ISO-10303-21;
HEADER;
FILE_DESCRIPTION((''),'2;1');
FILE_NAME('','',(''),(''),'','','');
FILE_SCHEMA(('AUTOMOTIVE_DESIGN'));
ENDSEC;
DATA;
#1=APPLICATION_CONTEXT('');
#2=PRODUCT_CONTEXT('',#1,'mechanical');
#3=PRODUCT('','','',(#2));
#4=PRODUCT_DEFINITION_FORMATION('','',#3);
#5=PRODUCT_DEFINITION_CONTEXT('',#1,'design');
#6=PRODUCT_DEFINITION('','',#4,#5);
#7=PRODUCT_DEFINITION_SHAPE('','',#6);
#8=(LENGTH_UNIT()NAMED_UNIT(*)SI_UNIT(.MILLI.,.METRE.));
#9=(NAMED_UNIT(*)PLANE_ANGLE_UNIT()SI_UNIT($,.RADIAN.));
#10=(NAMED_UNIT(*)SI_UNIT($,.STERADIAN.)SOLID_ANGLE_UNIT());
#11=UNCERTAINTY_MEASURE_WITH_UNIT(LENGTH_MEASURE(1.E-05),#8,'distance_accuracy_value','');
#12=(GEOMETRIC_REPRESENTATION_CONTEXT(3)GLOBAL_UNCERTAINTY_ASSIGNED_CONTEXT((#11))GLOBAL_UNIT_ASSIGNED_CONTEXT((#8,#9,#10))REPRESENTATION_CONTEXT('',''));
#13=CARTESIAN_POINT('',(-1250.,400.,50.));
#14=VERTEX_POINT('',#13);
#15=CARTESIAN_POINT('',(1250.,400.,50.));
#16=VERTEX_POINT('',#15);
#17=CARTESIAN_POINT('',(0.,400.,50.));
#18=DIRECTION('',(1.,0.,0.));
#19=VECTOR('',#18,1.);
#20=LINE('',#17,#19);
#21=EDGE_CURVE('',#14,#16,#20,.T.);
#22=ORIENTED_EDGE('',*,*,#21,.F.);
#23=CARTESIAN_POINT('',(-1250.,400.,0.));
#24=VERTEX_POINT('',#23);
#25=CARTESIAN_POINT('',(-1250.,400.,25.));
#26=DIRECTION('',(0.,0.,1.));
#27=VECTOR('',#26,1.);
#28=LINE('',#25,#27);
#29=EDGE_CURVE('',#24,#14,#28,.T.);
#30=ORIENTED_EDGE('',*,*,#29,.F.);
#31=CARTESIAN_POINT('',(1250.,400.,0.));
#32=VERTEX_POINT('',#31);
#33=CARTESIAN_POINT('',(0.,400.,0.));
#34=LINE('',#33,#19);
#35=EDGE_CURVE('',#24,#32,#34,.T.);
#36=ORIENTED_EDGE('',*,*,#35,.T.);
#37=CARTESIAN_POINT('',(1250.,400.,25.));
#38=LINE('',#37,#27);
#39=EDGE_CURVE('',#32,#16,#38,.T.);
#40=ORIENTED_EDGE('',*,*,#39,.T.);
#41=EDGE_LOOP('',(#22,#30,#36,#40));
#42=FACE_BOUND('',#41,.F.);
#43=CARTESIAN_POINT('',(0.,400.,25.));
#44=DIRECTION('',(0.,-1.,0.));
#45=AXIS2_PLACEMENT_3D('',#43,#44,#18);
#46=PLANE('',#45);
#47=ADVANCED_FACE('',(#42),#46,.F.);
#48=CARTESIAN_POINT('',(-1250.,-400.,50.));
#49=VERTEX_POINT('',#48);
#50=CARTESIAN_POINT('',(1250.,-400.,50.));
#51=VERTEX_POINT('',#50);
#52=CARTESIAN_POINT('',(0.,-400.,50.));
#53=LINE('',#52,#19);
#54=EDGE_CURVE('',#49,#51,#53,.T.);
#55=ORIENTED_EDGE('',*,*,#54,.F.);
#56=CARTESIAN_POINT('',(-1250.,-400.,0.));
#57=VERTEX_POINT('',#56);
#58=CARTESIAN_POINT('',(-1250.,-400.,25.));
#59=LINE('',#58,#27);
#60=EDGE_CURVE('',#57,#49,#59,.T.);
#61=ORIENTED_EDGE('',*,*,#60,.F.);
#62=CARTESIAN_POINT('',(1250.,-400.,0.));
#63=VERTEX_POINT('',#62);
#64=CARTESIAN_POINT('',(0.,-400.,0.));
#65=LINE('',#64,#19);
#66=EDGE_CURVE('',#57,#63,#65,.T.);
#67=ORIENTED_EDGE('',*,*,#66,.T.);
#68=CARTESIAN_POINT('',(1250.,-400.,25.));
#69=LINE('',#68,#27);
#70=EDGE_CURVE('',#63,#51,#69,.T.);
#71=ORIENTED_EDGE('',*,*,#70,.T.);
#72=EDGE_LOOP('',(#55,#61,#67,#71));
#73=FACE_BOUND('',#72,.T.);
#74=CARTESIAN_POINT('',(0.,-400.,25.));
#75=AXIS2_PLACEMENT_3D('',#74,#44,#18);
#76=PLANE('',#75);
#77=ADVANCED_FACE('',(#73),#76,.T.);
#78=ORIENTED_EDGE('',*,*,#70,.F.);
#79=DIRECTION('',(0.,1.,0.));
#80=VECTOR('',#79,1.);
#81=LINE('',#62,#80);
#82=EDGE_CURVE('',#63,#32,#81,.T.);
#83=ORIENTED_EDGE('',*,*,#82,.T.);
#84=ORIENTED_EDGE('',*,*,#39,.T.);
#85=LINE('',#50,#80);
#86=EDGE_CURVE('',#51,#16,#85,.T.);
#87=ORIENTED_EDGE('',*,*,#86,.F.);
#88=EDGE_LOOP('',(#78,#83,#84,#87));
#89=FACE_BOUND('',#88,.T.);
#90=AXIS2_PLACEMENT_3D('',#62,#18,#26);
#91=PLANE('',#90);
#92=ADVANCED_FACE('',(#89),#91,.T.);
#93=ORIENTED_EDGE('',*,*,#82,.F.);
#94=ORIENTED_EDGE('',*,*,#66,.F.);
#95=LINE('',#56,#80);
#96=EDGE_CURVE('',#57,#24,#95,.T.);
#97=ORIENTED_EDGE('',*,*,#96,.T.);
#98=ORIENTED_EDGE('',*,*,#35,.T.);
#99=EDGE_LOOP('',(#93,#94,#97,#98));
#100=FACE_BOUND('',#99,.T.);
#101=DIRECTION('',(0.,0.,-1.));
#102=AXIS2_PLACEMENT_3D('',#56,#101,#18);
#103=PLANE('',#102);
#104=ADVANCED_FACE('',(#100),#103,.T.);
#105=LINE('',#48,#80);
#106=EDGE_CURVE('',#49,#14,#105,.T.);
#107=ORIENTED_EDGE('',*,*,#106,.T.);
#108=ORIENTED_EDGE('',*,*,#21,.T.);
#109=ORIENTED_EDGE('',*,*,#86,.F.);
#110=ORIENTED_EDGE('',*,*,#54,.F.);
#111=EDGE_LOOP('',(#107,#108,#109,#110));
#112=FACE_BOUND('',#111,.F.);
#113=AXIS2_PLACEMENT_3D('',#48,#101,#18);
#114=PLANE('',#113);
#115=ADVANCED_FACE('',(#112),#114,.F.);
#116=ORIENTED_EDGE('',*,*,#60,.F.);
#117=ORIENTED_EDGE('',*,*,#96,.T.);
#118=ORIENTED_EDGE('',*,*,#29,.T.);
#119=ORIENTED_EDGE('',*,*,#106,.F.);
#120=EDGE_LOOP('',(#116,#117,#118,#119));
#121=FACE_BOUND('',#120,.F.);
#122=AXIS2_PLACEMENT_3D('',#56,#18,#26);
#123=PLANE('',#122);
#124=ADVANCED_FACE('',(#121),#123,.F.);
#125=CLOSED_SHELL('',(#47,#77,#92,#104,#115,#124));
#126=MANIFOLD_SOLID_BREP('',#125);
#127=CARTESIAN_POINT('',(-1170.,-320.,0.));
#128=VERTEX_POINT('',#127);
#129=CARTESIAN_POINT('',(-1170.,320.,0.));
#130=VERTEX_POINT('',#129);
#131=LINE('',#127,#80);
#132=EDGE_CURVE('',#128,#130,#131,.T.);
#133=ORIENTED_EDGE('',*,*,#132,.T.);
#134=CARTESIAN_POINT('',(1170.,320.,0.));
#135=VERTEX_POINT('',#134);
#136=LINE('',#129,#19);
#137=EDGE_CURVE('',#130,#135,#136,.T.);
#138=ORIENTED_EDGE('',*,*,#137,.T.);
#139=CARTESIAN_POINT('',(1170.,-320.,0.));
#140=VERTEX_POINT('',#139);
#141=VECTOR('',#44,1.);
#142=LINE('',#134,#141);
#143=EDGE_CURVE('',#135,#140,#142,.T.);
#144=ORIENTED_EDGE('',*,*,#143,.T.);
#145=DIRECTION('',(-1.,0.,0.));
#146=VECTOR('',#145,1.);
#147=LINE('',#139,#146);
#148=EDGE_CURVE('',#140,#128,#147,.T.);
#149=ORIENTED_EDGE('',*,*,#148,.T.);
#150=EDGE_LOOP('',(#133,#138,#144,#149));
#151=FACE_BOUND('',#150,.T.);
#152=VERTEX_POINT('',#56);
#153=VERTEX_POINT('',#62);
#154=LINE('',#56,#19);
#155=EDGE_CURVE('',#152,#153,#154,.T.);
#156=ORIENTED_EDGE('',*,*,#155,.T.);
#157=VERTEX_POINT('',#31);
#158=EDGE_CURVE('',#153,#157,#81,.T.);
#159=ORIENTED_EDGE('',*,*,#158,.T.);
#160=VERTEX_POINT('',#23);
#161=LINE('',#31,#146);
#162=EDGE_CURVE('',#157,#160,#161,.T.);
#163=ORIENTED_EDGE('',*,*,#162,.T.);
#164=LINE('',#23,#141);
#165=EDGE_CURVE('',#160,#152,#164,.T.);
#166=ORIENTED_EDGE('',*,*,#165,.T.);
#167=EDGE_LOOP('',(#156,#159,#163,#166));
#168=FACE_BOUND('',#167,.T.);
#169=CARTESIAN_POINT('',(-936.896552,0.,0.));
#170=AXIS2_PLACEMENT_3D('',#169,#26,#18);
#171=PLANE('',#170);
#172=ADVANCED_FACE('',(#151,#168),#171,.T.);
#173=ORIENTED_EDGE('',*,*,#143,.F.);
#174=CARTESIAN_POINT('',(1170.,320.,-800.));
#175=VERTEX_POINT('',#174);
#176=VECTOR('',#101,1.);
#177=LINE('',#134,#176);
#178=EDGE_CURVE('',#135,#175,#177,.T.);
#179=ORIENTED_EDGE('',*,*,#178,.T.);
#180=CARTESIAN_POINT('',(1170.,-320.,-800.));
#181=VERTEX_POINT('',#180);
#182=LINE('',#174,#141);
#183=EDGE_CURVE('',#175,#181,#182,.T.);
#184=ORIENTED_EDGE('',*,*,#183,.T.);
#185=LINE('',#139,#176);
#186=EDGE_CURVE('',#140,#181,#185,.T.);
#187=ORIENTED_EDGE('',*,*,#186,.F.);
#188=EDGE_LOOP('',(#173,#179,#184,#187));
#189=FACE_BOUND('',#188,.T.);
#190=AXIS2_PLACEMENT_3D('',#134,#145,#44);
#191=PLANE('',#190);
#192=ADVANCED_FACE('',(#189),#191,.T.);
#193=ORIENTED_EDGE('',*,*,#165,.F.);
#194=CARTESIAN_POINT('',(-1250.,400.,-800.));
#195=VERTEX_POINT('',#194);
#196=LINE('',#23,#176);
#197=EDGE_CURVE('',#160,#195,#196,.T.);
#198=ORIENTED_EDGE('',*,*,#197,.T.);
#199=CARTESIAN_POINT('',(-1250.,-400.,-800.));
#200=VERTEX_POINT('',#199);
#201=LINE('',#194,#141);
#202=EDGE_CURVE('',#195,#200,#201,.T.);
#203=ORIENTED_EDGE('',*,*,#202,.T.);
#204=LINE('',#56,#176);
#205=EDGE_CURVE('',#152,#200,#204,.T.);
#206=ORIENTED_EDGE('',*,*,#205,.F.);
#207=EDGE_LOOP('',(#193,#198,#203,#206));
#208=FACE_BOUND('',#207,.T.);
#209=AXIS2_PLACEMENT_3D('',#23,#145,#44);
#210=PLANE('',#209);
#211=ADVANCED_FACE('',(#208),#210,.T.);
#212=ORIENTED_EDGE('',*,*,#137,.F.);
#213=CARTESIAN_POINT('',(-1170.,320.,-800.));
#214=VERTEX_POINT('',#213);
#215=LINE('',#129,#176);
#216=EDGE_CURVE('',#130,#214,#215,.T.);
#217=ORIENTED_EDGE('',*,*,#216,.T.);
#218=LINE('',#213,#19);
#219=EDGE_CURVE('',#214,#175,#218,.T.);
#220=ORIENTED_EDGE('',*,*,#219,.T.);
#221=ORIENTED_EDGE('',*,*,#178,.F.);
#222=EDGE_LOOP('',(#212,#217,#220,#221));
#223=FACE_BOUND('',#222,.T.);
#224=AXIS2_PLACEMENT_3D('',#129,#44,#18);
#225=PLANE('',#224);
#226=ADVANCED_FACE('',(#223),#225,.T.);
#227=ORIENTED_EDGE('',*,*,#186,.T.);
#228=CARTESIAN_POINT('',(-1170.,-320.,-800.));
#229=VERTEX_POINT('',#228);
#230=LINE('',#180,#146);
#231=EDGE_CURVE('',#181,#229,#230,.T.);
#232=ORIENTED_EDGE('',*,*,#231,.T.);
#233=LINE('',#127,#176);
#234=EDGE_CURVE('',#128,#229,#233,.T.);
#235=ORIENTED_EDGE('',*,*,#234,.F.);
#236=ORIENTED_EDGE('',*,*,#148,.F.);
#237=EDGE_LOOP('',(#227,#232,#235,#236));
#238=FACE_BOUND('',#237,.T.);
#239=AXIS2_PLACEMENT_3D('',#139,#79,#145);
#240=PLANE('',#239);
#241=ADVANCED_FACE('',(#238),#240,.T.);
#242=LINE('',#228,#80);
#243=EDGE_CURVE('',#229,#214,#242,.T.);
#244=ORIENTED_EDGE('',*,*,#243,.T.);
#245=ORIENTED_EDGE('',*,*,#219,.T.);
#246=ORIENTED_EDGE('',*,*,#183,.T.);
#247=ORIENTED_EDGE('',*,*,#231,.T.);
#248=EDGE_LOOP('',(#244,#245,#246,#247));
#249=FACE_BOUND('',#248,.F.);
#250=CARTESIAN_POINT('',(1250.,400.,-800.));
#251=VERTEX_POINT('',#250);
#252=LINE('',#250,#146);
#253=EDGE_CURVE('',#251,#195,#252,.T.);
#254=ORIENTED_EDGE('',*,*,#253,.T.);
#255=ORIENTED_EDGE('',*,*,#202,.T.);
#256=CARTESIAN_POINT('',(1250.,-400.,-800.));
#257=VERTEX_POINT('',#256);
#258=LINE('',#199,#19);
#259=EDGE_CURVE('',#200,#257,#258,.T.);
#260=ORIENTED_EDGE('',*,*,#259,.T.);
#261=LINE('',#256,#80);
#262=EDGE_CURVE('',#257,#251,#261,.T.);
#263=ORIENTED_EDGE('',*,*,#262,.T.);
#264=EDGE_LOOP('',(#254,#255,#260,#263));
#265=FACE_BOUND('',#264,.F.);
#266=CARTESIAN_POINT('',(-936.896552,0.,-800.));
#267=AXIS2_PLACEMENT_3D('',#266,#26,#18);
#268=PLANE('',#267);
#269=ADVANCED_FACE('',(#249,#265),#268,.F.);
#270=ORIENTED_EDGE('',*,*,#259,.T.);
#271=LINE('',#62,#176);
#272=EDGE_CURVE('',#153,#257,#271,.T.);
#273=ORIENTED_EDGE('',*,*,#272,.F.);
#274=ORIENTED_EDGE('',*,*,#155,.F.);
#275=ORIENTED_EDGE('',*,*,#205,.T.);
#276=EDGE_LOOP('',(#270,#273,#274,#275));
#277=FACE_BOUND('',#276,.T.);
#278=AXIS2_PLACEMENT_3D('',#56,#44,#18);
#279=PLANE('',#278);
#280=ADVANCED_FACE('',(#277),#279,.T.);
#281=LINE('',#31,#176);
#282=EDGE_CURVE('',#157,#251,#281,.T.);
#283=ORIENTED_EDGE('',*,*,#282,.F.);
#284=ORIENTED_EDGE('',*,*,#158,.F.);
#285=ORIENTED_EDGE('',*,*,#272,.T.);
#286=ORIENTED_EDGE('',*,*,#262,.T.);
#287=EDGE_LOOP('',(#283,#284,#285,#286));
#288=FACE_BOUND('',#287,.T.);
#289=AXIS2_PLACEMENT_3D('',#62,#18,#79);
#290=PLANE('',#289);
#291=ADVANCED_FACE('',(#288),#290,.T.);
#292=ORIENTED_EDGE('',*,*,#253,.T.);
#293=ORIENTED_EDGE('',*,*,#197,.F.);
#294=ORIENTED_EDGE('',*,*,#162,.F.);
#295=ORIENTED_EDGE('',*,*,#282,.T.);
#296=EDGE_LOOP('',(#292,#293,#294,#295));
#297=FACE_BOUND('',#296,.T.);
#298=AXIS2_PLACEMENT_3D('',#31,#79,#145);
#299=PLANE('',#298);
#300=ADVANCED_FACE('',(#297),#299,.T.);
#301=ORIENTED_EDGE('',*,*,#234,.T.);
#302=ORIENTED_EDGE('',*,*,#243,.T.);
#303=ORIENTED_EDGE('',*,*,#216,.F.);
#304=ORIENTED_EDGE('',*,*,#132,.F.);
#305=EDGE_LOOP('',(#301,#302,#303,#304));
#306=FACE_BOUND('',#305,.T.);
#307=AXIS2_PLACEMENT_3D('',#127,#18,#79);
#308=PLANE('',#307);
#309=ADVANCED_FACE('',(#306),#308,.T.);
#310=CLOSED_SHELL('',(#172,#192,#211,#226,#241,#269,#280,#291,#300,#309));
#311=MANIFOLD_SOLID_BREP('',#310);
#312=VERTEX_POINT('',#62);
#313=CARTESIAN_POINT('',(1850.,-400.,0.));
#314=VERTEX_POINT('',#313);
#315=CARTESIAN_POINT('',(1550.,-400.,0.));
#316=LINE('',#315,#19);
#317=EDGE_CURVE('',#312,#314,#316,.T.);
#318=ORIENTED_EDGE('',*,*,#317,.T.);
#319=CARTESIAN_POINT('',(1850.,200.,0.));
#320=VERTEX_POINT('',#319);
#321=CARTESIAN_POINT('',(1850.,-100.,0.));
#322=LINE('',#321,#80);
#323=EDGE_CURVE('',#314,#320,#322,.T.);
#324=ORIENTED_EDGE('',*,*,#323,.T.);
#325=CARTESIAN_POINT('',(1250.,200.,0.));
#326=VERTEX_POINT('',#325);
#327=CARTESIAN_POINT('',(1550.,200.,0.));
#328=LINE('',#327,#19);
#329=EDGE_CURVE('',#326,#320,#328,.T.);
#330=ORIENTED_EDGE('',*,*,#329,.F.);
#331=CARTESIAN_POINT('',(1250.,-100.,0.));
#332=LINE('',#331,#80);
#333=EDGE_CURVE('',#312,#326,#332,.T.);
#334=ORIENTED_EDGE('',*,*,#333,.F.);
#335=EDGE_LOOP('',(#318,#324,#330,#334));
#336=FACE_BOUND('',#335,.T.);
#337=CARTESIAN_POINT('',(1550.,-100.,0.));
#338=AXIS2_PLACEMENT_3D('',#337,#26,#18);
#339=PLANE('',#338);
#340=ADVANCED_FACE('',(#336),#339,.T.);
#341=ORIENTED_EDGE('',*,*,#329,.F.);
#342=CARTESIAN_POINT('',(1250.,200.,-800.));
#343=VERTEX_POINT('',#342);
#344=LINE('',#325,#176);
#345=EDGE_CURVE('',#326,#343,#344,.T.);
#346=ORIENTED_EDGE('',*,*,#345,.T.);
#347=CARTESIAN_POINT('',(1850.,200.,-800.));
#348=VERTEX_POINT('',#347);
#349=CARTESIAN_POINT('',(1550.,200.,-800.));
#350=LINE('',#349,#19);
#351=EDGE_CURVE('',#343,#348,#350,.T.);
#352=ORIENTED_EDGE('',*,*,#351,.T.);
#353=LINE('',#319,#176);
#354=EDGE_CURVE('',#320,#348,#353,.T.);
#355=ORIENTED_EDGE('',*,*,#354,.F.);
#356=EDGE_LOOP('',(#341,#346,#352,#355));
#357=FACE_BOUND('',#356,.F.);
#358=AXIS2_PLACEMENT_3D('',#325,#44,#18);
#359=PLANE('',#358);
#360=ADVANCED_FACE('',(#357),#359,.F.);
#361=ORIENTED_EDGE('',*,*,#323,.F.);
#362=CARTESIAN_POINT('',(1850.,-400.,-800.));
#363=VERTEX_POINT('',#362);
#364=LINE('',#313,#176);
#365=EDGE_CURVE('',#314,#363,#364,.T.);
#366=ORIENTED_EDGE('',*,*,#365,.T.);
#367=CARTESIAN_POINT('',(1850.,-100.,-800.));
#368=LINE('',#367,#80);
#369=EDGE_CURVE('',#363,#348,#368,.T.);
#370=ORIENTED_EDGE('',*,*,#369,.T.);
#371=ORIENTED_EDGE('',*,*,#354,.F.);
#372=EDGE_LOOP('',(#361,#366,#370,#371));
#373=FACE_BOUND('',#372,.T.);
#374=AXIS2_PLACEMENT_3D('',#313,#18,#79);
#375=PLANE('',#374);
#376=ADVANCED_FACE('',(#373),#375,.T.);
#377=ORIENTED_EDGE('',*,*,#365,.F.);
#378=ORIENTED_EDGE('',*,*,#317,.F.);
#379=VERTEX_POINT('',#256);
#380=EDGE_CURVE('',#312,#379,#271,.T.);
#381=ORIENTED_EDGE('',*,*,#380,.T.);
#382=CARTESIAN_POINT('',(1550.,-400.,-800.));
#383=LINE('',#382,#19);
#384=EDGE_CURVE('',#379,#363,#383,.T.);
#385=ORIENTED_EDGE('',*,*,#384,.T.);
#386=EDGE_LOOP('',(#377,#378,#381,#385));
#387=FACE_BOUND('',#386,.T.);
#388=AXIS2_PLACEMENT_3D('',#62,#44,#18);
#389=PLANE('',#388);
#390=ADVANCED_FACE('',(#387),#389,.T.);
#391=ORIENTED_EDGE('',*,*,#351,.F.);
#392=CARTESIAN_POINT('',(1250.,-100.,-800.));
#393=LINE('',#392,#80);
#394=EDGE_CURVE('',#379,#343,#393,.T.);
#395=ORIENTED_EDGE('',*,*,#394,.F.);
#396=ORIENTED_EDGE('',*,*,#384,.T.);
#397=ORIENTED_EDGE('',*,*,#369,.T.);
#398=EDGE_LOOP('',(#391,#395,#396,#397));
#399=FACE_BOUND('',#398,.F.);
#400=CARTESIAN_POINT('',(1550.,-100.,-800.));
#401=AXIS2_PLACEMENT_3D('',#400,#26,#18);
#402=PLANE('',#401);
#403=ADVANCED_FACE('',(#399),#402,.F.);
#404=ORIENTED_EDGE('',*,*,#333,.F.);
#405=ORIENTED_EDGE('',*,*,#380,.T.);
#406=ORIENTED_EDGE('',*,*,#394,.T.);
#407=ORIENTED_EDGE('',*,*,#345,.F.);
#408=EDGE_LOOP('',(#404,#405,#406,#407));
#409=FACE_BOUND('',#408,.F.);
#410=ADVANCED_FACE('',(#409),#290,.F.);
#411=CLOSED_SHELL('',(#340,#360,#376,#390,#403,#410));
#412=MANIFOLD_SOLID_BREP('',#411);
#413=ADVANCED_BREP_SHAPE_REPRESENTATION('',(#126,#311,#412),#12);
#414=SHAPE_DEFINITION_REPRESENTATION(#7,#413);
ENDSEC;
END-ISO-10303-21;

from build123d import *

# Parameters (mm, degrees)
F0_W     = 900
F0_H     = 80
F1_DEPTH = 800
F2_W     = 2500
F2_H     = 50
F3_DEPTH = 800
F0_W_2   = 600
F0_H_2   = 600
F4_DEPTH = 800


with BuildPart() as f1:
    # F0 (on Top) → F1 (new body)
    with BuildSketch(Plane.XY):
        Polygon((-450, 400), (-1250, 400), (-1250, -400), (-450, -400), (-450, -320), (-1170, -320), (-1170, 320), (-450, 320), align=None)
        with Locations((0, 360)):
            Rectangle(F0_W, F0_H)
        Polygon((1250, 400), (450, 400), (450, 320), (1170, 320), (1170, -320), (450, -320), (450, -400), (1250, -400), (1250, 200), align=None)
        with Locations((0, -360)):
            Rectangle(F0_W, F0_H)
    extrude(amount=-F1_DEPTH)


with BuildPart() as f3:
    # F2 (on face) → F3 (new body)
    with BuildSketch(Plane.XZ.offset(400)):
        with Locations((0, 25)):
            Rectangle(F2_W, F2_H)
    extrude(amount=-F3_DEPTH)


with BuildPart() as f4:
    # F0 (on Top) → F4 (new body)
    with BuildSketch(Plane.XY):
        with Locations((1550, -100)):
            Rectangle(F0_W_2, F0_H_2)
    extrude(amount=-F4_DEPTH)


solid = Compound([f1.part, f3.part, f4.part])
